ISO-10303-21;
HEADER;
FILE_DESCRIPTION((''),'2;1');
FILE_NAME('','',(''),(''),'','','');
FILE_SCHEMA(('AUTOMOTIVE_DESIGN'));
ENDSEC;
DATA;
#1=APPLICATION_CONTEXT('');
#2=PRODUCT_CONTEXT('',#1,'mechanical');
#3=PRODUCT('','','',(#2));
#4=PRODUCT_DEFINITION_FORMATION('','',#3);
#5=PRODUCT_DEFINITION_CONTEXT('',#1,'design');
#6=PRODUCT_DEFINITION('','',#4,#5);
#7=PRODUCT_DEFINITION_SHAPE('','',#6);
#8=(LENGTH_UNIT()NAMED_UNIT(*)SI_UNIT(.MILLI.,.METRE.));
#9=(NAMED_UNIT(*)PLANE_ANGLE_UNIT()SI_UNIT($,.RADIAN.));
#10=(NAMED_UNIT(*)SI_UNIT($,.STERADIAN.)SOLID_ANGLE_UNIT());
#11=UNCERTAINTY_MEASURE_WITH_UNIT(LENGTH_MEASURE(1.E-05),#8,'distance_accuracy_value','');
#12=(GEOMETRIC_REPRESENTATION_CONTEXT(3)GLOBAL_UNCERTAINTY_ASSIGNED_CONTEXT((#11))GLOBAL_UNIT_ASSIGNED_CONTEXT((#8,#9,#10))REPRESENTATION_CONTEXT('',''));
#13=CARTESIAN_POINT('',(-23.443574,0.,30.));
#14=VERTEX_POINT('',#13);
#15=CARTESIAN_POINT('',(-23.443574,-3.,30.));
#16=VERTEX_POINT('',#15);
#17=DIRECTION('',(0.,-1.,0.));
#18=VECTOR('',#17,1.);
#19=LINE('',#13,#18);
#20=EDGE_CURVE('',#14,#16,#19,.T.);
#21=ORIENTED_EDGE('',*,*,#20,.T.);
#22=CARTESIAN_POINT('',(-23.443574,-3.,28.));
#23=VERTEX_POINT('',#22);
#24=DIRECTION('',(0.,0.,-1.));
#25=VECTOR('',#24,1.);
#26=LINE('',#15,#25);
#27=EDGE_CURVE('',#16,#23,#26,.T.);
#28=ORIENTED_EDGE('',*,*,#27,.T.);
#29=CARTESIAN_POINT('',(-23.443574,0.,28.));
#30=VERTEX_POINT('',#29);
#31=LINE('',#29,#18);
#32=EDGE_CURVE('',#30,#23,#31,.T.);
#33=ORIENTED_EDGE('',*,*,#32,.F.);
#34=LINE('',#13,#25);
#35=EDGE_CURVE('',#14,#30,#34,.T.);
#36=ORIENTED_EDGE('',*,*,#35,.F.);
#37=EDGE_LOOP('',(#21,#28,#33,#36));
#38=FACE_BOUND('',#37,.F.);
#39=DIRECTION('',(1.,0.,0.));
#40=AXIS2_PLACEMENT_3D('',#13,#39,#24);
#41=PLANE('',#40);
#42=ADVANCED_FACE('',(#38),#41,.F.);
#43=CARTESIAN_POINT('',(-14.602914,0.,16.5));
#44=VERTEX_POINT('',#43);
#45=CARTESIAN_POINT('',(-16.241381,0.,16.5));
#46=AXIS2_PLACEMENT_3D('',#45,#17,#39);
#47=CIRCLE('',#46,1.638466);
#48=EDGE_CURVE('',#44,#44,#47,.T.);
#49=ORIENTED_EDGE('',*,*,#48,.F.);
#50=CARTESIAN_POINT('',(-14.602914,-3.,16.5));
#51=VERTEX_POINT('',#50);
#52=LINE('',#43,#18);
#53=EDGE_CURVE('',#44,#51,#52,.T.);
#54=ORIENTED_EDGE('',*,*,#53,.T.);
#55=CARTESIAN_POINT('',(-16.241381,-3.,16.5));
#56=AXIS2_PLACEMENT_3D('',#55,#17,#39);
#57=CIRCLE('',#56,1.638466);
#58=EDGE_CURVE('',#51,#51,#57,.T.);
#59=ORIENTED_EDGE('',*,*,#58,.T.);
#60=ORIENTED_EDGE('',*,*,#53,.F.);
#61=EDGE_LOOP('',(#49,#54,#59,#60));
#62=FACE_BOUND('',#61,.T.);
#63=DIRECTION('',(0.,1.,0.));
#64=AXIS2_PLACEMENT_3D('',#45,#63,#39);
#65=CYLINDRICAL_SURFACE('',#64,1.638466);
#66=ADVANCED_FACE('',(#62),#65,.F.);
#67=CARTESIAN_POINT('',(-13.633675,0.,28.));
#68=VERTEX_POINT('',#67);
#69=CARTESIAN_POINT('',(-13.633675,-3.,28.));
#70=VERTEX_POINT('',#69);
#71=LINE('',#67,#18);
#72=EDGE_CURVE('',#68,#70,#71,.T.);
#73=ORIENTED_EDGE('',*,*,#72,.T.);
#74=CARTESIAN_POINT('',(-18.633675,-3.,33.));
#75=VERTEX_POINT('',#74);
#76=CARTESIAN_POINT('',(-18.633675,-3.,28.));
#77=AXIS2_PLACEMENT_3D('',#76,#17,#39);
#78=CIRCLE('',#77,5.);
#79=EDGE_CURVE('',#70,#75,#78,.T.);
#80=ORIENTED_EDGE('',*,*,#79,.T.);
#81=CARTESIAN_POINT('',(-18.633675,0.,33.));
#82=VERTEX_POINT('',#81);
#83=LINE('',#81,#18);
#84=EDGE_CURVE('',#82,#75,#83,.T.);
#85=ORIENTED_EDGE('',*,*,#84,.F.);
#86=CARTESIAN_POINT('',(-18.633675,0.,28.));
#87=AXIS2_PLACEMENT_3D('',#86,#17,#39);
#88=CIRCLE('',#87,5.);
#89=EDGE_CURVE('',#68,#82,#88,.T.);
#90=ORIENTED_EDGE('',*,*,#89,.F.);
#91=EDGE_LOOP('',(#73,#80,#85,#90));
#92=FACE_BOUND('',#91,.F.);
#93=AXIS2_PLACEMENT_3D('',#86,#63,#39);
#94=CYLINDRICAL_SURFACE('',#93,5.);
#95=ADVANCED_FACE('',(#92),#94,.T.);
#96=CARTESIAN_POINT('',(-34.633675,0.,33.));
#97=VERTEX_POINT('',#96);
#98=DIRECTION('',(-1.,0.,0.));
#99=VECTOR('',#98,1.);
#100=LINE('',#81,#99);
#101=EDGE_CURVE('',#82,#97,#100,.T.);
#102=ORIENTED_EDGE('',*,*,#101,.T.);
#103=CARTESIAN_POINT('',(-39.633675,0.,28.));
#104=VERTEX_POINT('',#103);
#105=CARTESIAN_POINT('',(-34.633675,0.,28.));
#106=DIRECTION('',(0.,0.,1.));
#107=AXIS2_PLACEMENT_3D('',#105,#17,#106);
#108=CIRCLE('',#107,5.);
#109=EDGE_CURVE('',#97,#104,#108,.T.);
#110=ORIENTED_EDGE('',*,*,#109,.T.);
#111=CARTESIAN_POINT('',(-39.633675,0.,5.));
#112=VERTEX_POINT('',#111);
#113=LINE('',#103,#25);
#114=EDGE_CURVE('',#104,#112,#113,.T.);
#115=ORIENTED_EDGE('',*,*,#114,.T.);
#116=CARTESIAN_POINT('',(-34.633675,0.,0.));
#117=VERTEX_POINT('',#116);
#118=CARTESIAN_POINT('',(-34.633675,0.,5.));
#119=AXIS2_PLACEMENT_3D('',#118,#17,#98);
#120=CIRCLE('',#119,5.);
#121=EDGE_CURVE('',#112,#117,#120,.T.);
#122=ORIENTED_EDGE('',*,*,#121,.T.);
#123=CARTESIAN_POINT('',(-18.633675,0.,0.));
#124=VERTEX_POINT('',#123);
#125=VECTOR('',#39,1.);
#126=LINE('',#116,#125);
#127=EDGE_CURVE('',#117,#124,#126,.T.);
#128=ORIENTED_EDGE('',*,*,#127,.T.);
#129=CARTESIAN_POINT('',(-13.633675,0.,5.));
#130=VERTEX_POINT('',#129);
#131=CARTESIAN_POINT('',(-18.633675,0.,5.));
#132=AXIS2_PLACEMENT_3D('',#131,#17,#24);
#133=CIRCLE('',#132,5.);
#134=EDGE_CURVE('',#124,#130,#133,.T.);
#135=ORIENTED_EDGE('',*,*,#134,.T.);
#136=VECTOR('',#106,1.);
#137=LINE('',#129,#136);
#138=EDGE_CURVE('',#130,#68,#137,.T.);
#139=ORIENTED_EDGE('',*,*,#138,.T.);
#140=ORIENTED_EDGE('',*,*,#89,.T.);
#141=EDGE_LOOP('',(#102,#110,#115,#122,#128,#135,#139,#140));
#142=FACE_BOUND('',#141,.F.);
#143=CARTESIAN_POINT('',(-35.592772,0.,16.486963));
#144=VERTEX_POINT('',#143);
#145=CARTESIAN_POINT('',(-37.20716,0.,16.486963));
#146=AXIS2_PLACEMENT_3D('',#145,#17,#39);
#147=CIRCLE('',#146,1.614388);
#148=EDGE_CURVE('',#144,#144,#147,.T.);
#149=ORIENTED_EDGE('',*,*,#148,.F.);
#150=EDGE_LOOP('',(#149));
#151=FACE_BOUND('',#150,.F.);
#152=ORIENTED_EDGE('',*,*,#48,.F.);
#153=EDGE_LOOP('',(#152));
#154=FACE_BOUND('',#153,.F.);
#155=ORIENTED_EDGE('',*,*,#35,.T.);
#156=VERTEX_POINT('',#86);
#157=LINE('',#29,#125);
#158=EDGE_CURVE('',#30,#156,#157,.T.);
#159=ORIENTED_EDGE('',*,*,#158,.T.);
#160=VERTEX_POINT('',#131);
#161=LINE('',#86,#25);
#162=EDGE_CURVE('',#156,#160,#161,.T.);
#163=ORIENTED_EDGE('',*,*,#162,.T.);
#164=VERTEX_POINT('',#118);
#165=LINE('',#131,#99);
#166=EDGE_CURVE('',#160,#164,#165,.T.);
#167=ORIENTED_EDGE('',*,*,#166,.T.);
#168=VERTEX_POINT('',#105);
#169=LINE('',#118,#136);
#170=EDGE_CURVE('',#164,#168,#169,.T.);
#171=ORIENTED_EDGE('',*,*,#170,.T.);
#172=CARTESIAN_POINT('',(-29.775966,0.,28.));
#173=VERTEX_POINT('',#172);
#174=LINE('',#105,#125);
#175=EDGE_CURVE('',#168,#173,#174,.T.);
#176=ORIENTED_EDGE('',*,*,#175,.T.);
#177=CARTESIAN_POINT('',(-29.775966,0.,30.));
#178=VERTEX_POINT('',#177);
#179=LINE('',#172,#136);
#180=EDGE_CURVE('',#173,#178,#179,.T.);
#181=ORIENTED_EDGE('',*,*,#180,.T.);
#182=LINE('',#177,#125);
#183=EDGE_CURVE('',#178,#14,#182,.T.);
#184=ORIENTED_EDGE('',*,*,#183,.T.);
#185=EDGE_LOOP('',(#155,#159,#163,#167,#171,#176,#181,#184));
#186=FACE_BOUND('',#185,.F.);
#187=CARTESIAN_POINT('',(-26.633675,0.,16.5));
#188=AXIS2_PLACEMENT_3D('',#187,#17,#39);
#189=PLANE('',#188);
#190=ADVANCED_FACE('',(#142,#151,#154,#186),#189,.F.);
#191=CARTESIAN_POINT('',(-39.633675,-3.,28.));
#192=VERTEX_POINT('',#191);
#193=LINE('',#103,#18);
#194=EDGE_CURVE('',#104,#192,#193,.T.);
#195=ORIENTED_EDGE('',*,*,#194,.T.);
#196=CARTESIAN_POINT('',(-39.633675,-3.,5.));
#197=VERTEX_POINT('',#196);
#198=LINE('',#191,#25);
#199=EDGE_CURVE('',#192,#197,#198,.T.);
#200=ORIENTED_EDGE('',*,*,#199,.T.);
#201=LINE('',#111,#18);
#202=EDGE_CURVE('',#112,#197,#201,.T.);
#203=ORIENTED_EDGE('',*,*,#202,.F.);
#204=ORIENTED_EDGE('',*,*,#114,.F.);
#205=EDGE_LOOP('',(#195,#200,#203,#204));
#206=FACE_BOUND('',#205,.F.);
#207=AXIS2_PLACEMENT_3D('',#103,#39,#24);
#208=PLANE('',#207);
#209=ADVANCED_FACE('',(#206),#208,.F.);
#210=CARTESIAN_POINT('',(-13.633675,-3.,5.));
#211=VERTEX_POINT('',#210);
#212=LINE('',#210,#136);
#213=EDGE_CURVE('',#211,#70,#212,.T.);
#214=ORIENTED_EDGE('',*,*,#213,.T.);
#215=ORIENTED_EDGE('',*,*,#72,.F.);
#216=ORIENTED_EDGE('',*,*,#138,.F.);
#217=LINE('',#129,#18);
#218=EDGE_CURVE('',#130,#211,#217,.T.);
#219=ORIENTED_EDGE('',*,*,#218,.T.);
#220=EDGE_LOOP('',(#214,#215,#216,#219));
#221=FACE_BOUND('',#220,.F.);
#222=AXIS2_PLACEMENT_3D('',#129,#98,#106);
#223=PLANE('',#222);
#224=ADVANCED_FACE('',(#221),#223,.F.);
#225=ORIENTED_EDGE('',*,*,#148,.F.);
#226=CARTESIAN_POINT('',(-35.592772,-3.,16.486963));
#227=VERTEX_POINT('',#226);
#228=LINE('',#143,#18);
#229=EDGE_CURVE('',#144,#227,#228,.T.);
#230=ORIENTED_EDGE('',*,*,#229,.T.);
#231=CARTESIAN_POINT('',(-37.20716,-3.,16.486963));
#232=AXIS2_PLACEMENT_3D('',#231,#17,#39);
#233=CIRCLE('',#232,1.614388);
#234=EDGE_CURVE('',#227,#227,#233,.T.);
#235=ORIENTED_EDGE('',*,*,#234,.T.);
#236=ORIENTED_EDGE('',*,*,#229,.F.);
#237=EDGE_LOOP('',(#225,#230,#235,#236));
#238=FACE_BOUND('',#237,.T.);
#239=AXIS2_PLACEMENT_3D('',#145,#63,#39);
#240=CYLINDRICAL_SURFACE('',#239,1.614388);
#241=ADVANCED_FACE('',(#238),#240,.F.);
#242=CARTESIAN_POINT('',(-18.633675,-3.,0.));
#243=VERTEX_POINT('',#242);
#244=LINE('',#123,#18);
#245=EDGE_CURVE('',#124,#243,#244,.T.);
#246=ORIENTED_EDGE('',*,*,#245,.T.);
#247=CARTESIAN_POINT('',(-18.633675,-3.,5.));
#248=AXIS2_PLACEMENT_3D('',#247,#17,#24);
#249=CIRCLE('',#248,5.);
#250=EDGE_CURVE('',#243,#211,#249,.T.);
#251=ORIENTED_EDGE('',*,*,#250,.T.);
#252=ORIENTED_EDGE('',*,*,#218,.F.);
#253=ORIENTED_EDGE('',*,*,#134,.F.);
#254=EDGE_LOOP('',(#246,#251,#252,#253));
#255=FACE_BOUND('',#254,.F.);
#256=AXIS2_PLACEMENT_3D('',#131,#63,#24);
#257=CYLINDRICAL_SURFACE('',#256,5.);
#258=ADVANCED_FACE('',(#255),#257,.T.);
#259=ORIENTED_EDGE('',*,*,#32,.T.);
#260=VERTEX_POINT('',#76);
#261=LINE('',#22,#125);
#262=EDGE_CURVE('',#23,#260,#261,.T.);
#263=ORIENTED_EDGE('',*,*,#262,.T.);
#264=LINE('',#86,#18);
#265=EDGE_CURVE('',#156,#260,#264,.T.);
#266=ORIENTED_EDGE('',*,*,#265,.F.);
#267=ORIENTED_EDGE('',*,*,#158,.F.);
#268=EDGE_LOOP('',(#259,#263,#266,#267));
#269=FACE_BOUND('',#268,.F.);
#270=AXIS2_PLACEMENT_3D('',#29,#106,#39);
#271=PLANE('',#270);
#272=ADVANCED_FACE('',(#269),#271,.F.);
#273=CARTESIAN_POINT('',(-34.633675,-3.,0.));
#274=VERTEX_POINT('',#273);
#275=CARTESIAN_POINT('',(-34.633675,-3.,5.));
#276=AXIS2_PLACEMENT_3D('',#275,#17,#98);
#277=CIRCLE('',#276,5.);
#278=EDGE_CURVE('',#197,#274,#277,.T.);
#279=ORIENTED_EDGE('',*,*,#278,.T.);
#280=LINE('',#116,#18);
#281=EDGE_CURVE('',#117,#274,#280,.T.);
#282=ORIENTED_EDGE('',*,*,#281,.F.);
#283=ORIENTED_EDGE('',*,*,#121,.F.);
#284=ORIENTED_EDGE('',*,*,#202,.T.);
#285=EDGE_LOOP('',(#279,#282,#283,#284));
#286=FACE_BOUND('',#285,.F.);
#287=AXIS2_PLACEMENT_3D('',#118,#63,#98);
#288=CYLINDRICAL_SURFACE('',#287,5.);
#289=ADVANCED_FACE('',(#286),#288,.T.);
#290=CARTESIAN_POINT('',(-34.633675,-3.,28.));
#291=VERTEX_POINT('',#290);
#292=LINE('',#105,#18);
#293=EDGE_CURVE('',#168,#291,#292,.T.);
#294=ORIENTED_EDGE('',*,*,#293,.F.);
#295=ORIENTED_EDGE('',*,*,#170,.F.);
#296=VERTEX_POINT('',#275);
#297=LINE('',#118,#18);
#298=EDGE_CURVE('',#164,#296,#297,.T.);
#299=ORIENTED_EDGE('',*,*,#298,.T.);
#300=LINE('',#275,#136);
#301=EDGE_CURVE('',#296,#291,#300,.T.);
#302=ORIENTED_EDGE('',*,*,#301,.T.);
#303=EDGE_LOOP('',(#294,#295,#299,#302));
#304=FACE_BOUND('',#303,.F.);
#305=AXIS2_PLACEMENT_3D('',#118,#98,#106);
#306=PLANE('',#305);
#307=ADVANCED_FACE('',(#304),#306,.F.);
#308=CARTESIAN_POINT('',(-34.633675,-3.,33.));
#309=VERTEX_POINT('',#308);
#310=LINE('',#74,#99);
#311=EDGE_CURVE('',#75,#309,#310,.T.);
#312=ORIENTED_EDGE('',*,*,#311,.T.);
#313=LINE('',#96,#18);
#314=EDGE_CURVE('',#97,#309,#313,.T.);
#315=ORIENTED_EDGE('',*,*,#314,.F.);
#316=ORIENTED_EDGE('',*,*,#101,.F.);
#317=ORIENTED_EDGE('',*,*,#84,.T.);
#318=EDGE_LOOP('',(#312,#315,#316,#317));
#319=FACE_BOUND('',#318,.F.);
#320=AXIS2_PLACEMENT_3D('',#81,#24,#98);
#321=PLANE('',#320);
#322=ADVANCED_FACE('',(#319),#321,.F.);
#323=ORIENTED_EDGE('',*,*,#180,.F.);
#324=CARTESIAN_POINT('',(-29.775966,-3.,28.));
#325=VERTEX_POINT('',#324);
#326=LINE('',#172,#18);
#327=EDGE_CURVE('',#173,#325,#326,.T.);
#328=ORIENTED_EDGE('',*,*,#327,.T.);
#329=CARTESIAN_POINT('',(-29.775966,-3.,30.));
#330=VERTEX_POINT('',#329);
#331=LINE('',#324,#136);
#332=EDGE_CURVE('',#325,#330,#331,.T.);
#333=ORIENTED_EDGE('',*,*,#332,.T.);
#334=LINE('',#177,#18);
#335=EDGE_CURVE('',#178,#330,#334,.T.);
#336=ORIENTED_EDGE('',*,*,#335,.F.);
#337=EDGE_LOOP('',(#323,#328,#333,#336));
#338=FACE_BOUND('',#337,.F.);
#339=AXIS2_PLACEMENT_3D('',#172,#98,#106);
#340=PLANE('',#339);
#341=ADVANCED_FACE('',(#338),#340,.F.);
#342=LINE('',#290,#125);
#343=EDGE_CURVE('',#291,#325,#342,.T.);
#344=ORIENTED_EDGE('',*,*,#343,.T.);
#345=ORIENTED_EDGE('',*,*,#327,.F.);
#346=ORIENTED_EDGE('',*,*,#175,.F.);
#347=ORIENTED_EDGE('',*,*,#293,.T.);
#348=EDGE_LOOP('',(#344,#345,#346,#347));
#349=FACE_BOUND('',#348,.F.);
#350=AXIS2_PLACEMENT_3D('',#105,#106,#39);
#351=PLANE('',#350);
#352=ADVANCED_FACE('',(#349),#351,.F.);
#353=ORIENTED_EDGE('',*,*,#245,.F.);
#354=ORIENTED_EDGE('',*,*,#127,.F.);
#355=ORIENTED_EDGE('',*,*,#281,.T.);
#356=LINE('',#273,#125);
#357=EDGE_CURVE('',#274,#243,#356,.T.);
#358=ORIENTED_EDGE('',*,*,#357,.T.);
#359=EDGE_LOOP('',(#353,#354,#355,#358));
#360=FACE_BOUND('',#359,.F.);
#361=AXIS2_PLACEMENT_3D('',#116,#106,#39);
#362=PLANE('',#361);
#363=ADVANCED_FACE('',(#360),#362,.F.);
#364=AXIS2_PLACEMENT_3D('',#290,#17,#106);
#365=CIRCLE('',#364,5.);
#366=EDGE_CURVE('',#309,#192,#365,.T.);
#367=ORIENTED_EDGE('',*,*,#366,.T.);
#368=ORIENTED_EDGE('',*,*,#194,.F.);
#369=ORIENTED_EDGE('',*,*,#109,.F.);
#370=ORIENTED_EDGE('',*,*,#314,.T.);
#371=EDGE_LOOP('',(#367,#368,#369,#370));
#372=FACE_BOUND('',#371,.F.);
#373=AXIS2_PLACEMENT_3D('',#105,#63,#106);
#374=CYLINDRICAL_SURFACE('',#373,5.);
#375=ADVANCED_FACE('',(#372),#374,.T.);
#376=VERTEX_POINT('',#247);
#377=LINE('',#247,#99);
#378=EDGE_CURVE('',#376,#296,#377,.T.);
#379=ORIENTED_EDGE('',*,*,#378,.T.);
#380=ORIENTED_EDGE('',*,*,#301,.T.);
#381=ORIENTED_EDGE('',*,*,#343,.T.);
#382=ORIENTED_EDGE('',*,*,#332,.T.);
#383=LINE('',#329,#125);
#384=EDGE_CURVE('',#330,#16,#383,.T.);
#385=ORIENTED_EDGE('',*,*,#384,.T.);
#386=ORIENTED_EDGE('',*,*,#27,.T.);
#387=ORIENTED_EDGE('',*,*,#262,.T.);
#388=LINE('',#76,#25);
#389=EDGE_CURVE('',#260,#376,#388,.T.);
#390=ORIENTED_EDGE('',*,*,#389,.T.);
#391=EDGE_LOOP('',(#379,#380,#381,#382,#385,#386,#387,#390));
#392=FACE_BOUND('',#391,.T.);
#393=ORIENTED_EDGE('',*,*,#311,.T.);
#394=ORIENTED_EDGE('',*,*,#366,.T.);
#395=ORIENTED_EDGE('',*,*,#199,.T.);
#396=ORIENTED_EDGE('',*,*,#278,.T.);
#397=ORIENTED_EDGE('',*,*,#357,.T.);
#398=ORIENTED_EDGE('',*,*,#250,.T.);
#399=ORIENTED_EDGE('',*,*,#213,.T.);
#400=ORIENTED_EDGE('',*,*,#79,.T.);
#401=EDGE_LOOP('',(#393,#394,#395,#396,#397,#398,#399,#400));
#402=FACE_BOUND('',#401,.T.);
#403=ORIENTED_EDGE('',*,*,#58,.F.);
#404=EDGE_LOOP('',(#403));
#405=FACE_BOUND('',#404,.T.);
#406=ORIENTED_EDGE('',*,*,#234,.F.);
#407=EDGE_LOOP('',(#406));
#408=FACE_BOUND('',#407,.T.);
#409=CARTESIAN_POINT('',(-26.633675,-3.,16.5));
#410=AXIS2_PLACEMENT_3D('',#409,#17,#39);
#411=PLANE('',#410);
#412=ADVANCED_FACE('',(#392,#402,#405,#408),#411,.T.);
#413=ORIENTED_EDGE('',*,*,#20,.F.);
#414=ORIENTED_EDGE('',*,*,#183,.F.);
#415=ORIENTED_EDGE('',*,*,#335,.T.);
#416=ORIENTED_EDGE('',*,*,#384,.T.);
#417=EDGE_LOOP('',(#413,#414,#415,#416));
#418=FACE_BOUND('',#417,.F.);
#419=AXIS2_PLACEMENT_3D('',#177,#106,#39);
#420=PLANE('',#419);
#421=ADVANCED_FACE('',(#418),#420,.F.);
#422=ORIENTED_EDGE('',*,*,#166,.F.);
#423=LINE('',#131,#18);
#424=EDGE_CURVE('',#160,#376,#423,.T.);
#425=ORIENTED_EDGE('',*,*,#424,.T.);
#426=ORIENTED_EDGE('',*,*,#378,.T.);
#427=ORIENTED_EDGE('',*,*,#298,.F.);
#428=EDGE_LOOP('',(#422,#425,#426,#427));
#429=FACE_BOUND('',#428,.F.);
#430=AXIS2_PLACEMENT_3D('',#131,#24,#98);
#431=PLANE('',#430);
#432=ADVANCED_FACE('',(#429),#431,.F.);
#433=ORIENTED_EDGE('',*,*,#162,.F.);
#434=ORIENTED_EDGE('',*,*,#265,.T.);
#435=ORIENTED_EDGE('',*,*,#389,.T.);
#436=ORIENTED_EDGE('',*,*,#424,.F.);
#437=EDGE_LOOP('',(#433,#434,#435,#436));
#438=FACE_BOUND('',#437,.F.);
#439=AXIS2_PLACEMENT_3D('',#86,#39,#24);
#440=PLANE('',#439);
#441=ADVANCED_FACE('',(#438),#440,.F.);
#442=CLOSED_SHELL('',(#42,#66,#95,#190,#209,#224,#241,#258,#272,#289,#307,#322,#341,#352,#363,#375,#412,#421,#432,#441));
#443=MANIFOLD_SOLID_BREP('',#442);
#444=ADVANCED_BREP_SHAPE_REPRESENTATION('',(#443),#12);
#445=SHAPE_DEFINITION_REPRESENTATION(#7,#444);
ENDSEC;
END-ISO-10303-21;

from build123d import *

# Parameters (mm, degrees)
F0_R     = 1.6143877839
F0_R_2   = 1.6384664926
F1_DEPTH = 3


# Not quite as in the source:
# - a feature names something its author has since deleted; it is built from what else it names


with BuildPart() as f1:
    # F0 (on Front) → F1 (new body)
    with BuildSketch(Plane.XZ):
        with BuildLine():
            Line((-39.6336754784, 28), (-39.6336754784, 5))
            ThreePointArc((-39.6336754784, 5), (-38.1692093843, 1.4644660941), (-34.6336754784, 0))
            Line((-34.6336754784, 0), (-18.6336754784, 0))
            ThreePointArc((-18.6336754784, 0), (-15.0981415725, 1.4644660941), (-13.6336754784, 5))
            Line((-13.6336754784, 5), (-13.6336754784, 28))
            ThreePointArc((-13.6336754784, 28), (-15.0981415725, 31.5355339059), (-18.6336754784, 33))
            Line((-18.6336754784, 33), (-34.6336754784, 33))
            ThreePointArc((-34.6336754784, 33), (-38.1692093843, 31.5355339059), (-39.6336754784, 28))
        make_face()
        with Locations((-37.207160145, 16.4869632572)):
            Circle(F0_R, mode=Mode.SUBTRACT)
        Polygon((-34.6336754784, 5), (-34.6336754784, 16.5), (-34.6336754784, 28), (-29.7759659588, 28), (-29.7759659588, 30), (-23.4435740858, 30), (-23.4435740858, 28), (-18.6336754784, 28), (-18.6336754784, 5), align=None, mode=Mode.SUBTRACT)
        with Locations((-16.2413809448, 16.5)):
            Circle(F0_R_2, mode=Mode.SUBTRACT)
    extrude(amount=F1_DEPTH)


solid = f1.part
